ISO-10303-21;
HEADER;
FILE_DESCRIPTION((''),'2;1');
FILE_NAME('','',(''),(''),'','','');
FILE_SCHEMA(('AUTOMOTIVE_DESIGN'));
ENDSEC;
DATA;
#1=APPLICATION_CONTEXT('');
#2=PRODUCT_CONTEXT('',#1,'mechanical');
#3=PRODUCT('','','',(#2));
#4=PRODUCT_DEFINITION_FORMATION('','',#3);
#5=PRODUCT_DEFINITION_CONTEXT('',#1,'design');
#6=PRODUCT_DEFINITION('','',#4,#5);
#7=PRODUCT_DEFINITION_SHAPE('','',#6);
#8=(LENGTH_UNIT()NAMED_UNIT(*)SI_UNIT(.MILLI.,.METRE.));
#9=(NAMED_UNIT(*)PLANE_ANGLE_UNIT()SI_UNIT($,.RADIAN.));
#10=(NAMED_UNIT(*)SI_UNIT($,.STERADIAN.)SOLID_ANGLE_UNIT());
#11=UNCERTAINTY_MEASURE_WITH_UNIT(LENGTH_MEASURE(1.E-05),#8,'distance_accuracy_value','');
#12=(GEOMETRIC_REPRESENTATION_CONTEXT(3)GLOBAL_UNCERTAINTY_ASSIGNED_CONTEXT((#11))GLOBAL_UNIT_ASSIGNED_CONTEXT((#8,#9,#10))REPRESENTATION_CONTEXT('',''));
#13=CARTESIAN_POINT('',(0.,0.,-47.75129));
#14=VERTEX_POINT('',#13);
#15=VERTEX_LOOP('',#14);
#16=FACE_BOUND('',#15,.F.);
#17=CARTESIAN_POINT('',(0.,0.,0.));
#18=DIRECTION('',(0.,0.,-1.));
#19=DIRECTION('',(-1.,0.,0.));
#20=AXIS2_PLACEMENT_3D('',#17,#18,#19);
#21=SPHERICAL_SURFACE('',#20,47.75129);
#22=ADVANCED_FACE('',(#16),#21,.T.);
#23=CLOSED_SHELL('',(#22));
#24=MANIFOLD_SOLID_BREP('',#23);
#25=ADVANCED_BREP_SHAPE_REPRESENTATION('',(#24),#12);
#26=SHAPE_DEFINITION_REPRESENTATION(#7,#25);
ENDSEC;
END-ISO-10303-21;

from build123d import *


# Not quite as in the source:
# - the program builds the solid bodies; features that only make, move or delete a surface that nothing else refers to are left out


with BuildPart() as f2:
    # F0 (on Front) → F2 (revolve)
    with BuildSketch(Plane.XZ):
        with BuildLine():
            Line((0, -47.7512898566), (0, 47.7512898566))
            ThreePointArc((0, 47.7512898566), (-47.7512898566, 0), (0, -47.7512898566))
        make_face()
    revolve(axis=Axis((0, 0, 0), (0, 0, 1)))


solid = f2.part
